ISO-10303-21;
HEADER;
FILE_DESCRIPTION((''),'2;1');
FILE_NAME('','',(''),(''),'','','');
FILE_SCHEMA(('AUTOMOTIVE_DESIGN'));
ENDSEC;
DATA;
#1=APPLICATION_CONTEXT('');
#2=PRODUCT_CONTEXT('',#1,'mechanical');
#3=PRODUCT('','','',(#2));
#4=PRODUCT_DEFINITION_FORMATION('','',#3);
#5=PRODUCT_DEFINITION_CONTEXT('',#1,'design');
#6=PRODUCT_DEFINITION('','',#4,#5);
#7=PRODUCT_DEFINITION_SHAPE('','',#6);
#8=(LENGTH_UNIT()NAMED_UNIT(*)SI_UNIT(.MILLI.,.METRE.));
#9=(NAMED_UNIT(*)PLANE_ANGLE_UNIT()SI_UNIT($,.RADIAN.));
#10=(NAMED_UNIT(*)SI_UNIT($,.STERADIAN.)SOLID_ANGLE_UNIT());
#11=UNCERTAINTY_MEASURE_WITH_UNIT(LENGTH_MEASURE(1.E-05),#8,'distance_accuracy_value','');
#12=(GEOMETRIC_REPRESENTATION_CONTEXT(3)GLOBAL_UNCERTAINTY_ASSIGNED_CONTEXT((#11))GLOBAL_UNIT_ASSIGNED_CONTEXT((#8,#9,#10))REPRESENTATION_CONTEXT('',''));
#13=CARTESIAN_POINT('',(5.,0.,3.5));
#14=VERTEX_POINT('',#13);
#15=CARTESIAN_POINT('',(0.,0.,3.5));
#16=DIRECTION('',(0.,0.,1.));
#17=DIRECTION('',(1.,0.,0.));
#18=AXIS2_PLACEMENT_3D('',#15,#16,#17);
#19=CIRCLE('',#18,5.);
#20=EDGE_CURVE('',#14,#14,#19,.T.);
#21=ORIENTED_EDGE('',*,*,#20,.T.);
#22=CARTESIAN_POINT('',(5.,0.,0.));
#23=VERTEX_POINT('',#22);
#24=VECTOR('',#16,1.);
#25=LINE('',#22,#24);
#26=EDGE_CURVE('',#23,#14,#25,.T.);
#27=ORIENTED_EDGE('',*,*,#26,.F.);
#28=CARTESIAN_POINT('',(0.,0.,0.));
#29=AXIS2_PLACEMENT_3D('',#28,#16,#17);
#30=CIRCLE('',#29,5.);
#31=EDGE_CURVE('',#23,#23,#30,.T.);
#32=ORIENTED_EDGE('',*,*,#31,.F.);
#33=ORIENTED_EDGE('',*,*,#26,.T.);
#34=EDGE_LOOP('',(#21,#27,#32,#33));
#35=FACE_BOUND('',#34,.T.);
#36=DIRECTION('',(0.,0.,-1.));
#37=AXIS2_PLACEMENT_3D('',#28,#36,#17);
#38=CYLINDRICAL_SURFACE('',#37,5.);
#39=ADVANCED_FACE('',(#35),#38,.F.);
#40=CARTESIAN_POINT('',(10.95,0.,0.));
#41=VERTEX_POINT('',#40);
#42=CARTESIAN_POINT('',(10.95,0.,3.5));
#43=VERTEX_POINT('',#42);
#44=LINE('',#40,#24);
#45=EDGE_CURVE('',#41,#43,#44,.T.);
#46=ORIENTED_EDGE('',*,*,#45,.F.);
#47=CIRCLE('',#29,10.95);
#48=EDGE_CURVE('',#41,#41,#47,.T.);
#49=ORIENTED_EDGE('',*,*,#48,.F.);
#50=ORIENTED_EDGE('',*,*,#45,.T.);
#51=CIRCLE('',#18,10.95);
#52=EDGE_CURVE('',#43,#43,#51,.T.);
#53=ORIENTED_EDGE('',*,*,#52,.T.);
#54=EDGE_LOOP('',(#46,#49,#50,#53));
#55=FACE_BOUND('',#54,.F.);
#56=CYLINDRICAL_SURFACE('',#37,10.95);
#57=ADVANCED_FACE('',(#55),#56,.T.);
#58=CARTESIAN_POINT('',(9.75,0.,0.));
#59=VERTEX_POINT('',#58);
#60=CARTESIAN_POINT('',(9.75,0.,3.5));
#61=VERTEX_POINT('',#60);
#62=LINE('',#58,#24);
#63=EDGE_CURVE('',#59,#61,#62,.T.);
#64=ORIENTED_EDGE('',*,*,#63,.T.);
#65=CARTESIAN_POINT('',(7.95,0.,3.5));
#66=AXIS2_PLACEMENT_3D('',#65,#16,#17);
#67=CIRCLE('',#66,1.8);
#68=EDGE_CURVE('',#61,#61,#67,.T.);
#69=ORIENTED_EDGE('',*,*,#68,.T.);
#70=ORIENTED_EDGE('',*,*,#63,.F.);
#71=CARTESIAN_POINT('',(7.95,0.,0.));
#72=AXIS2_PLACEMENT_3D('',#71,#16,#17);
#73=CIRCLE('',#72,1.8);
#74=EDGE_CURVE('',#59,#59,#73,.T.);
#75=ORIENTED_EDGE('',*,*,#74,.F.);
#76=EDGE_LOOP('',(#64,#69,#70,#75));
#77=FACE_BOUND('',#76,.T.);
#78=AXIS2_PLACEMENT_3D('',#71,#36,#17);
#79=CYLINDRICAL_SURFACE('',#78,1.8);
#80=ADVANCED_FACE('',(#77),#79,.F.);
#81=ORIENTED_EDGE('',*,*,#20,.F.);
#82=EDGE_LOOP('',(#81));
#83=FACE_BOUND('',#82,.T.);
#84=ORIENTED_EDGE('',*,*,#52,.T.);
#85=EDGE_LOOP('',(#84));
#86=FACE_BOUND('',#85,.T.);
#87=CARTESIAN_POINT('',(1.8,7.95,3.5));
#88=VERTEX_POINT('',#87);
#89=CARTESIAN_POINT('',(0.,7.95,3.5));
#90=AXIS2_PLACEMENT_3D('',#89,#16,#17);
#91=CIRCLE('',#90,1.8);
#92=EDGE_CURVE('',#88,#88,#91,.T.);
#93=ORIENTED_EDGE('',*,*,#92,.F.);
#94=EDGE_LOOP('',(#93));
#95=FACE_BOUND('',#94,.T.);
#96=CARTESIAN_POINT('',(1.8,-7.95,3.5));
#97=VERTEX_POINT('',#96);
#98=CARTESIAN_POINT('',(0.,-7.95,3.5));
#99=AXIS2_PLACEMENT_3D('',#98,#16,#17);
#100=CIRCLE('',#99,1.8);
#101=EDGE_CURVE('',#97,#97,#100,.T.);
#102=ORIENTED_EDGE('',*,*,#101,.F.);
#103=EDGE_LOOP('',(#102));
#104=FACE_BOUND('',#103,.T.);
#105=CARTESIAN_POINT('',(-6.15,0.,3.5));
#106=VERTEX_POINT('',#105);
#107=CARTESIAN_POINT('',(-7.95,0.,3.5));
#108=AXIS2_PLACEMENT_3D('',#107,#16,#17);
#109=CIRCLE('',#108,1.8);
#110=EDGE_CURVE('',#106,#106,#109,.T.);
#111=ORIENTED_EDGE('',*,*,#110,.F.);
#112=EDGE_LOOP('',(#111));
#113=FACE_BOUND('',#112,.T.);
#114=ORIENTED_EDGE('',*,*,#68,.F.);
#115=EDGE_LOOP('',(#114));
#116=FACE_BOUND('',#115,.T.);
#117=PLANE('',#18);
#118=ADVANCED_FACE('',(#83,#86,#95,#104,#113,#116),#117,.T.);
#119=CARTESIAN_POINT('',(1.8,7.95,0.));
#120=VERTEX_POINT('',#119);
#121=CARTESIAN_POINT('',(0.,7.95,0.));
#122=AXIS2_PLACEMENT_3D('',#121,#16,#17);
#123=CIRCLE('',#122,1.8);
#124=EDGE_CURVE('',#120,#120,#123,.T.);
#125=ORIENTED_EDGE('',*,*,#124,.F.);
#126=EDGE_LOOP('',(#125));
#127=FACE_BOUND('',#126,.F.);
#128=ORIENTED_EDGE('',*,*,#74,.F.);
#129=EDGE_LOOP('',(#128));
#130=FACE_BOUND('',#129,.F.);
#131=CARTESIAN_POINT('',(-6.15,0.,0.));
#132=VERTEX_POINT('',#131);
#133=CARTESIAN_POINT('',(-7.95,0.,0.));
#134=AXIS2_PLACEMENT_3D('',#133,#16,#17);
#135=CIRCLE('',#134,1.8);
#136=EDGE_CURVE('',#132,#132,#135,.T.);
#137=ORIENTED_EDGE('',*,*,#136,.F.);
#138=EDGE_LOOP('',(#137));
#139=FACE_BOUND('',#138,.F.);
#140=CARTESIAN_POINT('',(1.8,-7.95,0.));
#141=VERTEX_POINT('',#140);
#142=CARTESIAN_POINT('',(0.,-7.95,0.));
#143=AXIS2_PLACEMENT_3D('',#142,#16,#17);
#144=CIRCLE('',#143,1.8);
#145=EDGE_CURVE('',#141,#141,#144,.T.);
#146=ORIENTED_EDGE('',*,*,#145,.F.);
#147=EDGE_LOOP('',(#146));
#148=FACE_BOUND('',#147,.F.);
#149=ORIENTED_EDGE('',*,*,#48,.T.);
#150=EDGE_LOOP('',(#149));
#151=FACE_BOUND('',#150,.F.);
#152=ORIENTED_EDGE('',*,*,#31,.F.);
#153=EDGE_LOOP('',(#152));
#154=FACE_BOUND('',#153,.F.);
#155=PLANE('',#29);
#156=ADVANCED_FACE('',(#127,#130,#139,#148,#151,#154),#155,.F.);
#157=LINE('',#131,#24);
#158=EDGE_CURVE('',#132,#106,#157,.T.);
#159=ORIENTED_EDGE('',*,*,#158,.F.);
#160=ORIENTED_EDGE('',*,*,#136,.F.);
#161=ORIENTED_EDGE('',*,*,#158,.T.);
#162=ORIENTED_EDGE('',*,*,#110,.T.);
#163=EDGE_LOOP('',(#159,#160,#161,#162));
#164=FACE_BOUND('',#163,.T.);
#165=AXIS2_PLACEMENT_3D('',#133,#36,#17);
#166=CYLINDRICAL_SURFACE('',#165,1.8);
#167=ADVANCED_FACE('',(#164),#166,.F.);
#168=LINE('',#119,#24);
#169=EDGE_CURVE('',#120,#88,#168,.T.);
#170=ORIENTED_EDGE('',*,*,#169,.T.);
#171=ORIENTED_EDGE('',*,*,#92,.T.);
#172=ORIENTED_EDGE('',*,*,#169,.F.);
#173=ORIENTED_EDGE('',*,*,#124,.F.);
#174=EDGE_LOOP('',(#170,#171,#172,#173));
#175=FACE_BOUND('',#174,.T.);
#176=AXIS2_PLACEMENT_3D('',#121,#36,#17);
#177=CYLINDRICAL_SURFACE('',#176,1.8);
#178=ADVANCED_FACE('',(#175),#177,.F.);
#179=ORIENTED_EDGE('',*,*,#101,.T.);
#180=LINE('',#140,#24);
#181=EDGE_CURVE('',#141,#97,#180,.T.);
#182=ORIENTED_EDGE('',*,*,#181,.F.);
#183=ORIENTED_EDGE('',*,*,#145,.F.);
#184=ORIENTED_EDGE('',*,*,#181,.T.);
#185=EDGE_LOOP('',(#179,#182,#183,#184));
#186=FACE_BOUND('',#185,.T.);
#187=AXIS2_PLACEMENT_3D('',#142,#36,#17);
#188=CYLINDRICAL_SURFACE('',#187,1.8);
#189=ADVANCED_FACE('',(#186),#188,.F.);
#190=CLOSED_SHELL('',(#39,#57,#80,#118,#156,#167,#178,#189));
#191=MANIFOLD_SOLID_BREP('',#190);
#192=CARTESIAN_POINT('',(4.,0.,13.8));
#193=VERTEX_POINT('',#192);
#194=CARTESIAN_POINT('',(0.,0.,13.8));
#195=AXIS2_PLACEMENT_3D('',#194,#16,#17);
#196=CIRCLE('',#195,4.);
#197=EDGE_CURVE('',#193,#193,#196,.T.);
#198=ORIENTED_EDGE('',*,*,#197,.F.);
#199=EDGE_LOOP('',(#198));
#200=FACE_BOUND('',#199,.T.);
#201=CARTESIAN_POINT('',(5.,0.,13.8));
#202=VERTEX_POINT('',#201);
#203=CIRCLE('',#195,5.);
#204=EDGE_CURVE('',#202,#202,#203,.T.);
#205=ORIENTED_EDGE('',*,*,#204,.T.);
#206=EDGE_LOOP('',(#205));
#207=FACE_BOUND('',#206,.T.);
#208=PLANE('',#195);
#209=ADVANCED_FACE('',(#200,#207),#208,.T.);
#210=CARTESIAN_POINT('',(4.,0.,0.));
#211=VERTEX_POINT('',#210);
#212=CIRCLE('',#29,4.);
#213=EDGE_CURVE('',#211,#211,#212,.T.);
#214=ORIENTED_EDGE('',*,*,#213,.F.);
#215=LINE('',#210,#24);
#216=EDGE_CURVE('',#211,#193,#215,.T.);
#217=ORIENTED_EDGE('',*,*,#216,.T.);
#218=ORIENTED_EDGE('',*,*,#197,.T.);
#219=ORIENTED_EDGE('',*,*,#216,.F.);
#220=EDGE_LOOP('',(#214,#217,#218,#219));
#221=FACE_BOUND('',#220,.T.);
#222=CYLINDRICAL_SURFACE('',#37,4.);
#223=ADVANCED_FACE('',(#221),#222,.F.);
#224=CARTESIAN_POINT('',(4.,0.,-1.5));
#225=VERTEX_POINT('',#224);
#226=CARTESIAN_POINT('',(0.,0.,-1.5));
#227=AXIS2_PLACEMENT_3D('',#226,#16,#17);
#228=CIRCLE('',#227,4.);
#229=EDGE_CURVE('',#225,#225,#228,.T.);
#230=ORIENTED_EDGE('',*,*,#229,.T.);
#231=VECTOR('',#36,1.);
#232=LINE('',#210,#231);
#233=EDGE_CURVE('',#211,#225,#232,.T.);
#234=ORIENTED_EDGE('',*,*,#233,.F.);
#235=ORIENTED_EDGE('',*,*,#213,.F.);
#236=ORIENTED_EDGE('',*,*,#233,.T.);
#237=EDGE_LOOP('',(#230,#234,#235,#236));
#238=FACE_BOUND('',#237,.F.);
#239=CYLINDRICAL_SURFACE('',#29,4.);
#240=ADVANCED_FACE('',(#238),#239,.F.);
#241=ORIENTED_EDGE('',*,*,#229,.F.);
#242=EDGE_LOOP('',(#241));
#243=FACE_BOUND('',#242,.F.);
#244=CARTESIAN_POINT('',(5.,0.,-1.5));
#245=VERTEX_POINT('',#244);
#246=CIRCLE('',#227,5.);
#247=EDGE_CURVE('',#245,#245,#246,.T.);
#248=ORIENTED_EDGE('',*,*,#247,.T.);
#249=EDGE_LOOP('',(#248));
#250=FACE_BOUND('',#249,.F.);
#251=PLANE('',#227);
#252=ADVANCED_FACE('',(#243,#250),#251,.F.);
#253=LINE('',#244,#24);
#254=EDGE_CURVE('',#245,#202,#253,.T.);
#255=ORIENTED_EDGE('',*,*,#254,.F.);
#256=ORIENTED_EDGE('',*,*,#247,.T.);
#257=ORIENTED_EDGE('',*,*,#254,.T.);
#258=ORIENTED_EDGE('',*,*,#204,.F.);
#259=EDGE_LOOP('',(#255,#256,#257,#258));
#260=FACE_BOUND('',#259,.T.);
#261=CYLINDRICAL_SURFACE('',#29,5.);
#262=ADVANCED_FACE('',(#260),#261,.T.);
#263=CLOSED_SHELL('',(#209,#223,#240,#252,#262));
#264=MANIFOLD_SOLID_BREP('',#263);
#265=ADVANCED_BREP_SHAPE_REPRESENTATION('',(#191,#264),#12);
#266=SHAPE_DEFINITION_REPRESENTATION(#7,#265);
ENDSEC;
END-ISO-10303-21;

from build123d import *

# Parameters (mm, degrees)
F0_R     = 10.95
F0_R_2   = 1.8
F0_R_3   = 5
F1_DEPTH = 3.5
F0_R_4   = 4
F2_DEPTH = 13.8
F3_DEPTH = 1.5


with BuildPart() as f1:
    # F0 (on Top) → F1 (new body)
    with BuildSketch(Plane.XY):
        Circle(F0_R)
        with Locations((0, -7.95)):
            Circle(F0_R_2, mode=Mode.SUBTRACT)
        with Locations((-7.95, 0)):
            Circle(F0_R_2, mode=Mode.SUBTRACT)
        Circle(F0_R_3, mode=Mode.SUBTRACT)
        with Locations((7.95, 0)):
            Circle(F0_R_2, mode=Mode.SUBTRACT)
        with Locations((0, 7.95)):
            Circle(F0_R_2, mode=Mode.SUBTRACT)
    extrude(amount=F1_DEPTH)


with BuildPart() as f2:
    # F0 (on Top) → F2 (new body)
    with BuildSketch(Plane.XY):
        Circle(F0_R_3)
        Circle(F0_R_4, mode=Mode.SUBTRACT)
    extrude(amount=F2_DEPTH)

    # F0 (on Top) → F3 (join)
    with BuildSketch(Plane.XY):
        Circle(F0_R_3)
        Circle(F0_R_4, mode=Mode.SUBTRACT)
    extrude(amount=-F3_DEPTH)


solid = Compound([f1.part, f2.part])
